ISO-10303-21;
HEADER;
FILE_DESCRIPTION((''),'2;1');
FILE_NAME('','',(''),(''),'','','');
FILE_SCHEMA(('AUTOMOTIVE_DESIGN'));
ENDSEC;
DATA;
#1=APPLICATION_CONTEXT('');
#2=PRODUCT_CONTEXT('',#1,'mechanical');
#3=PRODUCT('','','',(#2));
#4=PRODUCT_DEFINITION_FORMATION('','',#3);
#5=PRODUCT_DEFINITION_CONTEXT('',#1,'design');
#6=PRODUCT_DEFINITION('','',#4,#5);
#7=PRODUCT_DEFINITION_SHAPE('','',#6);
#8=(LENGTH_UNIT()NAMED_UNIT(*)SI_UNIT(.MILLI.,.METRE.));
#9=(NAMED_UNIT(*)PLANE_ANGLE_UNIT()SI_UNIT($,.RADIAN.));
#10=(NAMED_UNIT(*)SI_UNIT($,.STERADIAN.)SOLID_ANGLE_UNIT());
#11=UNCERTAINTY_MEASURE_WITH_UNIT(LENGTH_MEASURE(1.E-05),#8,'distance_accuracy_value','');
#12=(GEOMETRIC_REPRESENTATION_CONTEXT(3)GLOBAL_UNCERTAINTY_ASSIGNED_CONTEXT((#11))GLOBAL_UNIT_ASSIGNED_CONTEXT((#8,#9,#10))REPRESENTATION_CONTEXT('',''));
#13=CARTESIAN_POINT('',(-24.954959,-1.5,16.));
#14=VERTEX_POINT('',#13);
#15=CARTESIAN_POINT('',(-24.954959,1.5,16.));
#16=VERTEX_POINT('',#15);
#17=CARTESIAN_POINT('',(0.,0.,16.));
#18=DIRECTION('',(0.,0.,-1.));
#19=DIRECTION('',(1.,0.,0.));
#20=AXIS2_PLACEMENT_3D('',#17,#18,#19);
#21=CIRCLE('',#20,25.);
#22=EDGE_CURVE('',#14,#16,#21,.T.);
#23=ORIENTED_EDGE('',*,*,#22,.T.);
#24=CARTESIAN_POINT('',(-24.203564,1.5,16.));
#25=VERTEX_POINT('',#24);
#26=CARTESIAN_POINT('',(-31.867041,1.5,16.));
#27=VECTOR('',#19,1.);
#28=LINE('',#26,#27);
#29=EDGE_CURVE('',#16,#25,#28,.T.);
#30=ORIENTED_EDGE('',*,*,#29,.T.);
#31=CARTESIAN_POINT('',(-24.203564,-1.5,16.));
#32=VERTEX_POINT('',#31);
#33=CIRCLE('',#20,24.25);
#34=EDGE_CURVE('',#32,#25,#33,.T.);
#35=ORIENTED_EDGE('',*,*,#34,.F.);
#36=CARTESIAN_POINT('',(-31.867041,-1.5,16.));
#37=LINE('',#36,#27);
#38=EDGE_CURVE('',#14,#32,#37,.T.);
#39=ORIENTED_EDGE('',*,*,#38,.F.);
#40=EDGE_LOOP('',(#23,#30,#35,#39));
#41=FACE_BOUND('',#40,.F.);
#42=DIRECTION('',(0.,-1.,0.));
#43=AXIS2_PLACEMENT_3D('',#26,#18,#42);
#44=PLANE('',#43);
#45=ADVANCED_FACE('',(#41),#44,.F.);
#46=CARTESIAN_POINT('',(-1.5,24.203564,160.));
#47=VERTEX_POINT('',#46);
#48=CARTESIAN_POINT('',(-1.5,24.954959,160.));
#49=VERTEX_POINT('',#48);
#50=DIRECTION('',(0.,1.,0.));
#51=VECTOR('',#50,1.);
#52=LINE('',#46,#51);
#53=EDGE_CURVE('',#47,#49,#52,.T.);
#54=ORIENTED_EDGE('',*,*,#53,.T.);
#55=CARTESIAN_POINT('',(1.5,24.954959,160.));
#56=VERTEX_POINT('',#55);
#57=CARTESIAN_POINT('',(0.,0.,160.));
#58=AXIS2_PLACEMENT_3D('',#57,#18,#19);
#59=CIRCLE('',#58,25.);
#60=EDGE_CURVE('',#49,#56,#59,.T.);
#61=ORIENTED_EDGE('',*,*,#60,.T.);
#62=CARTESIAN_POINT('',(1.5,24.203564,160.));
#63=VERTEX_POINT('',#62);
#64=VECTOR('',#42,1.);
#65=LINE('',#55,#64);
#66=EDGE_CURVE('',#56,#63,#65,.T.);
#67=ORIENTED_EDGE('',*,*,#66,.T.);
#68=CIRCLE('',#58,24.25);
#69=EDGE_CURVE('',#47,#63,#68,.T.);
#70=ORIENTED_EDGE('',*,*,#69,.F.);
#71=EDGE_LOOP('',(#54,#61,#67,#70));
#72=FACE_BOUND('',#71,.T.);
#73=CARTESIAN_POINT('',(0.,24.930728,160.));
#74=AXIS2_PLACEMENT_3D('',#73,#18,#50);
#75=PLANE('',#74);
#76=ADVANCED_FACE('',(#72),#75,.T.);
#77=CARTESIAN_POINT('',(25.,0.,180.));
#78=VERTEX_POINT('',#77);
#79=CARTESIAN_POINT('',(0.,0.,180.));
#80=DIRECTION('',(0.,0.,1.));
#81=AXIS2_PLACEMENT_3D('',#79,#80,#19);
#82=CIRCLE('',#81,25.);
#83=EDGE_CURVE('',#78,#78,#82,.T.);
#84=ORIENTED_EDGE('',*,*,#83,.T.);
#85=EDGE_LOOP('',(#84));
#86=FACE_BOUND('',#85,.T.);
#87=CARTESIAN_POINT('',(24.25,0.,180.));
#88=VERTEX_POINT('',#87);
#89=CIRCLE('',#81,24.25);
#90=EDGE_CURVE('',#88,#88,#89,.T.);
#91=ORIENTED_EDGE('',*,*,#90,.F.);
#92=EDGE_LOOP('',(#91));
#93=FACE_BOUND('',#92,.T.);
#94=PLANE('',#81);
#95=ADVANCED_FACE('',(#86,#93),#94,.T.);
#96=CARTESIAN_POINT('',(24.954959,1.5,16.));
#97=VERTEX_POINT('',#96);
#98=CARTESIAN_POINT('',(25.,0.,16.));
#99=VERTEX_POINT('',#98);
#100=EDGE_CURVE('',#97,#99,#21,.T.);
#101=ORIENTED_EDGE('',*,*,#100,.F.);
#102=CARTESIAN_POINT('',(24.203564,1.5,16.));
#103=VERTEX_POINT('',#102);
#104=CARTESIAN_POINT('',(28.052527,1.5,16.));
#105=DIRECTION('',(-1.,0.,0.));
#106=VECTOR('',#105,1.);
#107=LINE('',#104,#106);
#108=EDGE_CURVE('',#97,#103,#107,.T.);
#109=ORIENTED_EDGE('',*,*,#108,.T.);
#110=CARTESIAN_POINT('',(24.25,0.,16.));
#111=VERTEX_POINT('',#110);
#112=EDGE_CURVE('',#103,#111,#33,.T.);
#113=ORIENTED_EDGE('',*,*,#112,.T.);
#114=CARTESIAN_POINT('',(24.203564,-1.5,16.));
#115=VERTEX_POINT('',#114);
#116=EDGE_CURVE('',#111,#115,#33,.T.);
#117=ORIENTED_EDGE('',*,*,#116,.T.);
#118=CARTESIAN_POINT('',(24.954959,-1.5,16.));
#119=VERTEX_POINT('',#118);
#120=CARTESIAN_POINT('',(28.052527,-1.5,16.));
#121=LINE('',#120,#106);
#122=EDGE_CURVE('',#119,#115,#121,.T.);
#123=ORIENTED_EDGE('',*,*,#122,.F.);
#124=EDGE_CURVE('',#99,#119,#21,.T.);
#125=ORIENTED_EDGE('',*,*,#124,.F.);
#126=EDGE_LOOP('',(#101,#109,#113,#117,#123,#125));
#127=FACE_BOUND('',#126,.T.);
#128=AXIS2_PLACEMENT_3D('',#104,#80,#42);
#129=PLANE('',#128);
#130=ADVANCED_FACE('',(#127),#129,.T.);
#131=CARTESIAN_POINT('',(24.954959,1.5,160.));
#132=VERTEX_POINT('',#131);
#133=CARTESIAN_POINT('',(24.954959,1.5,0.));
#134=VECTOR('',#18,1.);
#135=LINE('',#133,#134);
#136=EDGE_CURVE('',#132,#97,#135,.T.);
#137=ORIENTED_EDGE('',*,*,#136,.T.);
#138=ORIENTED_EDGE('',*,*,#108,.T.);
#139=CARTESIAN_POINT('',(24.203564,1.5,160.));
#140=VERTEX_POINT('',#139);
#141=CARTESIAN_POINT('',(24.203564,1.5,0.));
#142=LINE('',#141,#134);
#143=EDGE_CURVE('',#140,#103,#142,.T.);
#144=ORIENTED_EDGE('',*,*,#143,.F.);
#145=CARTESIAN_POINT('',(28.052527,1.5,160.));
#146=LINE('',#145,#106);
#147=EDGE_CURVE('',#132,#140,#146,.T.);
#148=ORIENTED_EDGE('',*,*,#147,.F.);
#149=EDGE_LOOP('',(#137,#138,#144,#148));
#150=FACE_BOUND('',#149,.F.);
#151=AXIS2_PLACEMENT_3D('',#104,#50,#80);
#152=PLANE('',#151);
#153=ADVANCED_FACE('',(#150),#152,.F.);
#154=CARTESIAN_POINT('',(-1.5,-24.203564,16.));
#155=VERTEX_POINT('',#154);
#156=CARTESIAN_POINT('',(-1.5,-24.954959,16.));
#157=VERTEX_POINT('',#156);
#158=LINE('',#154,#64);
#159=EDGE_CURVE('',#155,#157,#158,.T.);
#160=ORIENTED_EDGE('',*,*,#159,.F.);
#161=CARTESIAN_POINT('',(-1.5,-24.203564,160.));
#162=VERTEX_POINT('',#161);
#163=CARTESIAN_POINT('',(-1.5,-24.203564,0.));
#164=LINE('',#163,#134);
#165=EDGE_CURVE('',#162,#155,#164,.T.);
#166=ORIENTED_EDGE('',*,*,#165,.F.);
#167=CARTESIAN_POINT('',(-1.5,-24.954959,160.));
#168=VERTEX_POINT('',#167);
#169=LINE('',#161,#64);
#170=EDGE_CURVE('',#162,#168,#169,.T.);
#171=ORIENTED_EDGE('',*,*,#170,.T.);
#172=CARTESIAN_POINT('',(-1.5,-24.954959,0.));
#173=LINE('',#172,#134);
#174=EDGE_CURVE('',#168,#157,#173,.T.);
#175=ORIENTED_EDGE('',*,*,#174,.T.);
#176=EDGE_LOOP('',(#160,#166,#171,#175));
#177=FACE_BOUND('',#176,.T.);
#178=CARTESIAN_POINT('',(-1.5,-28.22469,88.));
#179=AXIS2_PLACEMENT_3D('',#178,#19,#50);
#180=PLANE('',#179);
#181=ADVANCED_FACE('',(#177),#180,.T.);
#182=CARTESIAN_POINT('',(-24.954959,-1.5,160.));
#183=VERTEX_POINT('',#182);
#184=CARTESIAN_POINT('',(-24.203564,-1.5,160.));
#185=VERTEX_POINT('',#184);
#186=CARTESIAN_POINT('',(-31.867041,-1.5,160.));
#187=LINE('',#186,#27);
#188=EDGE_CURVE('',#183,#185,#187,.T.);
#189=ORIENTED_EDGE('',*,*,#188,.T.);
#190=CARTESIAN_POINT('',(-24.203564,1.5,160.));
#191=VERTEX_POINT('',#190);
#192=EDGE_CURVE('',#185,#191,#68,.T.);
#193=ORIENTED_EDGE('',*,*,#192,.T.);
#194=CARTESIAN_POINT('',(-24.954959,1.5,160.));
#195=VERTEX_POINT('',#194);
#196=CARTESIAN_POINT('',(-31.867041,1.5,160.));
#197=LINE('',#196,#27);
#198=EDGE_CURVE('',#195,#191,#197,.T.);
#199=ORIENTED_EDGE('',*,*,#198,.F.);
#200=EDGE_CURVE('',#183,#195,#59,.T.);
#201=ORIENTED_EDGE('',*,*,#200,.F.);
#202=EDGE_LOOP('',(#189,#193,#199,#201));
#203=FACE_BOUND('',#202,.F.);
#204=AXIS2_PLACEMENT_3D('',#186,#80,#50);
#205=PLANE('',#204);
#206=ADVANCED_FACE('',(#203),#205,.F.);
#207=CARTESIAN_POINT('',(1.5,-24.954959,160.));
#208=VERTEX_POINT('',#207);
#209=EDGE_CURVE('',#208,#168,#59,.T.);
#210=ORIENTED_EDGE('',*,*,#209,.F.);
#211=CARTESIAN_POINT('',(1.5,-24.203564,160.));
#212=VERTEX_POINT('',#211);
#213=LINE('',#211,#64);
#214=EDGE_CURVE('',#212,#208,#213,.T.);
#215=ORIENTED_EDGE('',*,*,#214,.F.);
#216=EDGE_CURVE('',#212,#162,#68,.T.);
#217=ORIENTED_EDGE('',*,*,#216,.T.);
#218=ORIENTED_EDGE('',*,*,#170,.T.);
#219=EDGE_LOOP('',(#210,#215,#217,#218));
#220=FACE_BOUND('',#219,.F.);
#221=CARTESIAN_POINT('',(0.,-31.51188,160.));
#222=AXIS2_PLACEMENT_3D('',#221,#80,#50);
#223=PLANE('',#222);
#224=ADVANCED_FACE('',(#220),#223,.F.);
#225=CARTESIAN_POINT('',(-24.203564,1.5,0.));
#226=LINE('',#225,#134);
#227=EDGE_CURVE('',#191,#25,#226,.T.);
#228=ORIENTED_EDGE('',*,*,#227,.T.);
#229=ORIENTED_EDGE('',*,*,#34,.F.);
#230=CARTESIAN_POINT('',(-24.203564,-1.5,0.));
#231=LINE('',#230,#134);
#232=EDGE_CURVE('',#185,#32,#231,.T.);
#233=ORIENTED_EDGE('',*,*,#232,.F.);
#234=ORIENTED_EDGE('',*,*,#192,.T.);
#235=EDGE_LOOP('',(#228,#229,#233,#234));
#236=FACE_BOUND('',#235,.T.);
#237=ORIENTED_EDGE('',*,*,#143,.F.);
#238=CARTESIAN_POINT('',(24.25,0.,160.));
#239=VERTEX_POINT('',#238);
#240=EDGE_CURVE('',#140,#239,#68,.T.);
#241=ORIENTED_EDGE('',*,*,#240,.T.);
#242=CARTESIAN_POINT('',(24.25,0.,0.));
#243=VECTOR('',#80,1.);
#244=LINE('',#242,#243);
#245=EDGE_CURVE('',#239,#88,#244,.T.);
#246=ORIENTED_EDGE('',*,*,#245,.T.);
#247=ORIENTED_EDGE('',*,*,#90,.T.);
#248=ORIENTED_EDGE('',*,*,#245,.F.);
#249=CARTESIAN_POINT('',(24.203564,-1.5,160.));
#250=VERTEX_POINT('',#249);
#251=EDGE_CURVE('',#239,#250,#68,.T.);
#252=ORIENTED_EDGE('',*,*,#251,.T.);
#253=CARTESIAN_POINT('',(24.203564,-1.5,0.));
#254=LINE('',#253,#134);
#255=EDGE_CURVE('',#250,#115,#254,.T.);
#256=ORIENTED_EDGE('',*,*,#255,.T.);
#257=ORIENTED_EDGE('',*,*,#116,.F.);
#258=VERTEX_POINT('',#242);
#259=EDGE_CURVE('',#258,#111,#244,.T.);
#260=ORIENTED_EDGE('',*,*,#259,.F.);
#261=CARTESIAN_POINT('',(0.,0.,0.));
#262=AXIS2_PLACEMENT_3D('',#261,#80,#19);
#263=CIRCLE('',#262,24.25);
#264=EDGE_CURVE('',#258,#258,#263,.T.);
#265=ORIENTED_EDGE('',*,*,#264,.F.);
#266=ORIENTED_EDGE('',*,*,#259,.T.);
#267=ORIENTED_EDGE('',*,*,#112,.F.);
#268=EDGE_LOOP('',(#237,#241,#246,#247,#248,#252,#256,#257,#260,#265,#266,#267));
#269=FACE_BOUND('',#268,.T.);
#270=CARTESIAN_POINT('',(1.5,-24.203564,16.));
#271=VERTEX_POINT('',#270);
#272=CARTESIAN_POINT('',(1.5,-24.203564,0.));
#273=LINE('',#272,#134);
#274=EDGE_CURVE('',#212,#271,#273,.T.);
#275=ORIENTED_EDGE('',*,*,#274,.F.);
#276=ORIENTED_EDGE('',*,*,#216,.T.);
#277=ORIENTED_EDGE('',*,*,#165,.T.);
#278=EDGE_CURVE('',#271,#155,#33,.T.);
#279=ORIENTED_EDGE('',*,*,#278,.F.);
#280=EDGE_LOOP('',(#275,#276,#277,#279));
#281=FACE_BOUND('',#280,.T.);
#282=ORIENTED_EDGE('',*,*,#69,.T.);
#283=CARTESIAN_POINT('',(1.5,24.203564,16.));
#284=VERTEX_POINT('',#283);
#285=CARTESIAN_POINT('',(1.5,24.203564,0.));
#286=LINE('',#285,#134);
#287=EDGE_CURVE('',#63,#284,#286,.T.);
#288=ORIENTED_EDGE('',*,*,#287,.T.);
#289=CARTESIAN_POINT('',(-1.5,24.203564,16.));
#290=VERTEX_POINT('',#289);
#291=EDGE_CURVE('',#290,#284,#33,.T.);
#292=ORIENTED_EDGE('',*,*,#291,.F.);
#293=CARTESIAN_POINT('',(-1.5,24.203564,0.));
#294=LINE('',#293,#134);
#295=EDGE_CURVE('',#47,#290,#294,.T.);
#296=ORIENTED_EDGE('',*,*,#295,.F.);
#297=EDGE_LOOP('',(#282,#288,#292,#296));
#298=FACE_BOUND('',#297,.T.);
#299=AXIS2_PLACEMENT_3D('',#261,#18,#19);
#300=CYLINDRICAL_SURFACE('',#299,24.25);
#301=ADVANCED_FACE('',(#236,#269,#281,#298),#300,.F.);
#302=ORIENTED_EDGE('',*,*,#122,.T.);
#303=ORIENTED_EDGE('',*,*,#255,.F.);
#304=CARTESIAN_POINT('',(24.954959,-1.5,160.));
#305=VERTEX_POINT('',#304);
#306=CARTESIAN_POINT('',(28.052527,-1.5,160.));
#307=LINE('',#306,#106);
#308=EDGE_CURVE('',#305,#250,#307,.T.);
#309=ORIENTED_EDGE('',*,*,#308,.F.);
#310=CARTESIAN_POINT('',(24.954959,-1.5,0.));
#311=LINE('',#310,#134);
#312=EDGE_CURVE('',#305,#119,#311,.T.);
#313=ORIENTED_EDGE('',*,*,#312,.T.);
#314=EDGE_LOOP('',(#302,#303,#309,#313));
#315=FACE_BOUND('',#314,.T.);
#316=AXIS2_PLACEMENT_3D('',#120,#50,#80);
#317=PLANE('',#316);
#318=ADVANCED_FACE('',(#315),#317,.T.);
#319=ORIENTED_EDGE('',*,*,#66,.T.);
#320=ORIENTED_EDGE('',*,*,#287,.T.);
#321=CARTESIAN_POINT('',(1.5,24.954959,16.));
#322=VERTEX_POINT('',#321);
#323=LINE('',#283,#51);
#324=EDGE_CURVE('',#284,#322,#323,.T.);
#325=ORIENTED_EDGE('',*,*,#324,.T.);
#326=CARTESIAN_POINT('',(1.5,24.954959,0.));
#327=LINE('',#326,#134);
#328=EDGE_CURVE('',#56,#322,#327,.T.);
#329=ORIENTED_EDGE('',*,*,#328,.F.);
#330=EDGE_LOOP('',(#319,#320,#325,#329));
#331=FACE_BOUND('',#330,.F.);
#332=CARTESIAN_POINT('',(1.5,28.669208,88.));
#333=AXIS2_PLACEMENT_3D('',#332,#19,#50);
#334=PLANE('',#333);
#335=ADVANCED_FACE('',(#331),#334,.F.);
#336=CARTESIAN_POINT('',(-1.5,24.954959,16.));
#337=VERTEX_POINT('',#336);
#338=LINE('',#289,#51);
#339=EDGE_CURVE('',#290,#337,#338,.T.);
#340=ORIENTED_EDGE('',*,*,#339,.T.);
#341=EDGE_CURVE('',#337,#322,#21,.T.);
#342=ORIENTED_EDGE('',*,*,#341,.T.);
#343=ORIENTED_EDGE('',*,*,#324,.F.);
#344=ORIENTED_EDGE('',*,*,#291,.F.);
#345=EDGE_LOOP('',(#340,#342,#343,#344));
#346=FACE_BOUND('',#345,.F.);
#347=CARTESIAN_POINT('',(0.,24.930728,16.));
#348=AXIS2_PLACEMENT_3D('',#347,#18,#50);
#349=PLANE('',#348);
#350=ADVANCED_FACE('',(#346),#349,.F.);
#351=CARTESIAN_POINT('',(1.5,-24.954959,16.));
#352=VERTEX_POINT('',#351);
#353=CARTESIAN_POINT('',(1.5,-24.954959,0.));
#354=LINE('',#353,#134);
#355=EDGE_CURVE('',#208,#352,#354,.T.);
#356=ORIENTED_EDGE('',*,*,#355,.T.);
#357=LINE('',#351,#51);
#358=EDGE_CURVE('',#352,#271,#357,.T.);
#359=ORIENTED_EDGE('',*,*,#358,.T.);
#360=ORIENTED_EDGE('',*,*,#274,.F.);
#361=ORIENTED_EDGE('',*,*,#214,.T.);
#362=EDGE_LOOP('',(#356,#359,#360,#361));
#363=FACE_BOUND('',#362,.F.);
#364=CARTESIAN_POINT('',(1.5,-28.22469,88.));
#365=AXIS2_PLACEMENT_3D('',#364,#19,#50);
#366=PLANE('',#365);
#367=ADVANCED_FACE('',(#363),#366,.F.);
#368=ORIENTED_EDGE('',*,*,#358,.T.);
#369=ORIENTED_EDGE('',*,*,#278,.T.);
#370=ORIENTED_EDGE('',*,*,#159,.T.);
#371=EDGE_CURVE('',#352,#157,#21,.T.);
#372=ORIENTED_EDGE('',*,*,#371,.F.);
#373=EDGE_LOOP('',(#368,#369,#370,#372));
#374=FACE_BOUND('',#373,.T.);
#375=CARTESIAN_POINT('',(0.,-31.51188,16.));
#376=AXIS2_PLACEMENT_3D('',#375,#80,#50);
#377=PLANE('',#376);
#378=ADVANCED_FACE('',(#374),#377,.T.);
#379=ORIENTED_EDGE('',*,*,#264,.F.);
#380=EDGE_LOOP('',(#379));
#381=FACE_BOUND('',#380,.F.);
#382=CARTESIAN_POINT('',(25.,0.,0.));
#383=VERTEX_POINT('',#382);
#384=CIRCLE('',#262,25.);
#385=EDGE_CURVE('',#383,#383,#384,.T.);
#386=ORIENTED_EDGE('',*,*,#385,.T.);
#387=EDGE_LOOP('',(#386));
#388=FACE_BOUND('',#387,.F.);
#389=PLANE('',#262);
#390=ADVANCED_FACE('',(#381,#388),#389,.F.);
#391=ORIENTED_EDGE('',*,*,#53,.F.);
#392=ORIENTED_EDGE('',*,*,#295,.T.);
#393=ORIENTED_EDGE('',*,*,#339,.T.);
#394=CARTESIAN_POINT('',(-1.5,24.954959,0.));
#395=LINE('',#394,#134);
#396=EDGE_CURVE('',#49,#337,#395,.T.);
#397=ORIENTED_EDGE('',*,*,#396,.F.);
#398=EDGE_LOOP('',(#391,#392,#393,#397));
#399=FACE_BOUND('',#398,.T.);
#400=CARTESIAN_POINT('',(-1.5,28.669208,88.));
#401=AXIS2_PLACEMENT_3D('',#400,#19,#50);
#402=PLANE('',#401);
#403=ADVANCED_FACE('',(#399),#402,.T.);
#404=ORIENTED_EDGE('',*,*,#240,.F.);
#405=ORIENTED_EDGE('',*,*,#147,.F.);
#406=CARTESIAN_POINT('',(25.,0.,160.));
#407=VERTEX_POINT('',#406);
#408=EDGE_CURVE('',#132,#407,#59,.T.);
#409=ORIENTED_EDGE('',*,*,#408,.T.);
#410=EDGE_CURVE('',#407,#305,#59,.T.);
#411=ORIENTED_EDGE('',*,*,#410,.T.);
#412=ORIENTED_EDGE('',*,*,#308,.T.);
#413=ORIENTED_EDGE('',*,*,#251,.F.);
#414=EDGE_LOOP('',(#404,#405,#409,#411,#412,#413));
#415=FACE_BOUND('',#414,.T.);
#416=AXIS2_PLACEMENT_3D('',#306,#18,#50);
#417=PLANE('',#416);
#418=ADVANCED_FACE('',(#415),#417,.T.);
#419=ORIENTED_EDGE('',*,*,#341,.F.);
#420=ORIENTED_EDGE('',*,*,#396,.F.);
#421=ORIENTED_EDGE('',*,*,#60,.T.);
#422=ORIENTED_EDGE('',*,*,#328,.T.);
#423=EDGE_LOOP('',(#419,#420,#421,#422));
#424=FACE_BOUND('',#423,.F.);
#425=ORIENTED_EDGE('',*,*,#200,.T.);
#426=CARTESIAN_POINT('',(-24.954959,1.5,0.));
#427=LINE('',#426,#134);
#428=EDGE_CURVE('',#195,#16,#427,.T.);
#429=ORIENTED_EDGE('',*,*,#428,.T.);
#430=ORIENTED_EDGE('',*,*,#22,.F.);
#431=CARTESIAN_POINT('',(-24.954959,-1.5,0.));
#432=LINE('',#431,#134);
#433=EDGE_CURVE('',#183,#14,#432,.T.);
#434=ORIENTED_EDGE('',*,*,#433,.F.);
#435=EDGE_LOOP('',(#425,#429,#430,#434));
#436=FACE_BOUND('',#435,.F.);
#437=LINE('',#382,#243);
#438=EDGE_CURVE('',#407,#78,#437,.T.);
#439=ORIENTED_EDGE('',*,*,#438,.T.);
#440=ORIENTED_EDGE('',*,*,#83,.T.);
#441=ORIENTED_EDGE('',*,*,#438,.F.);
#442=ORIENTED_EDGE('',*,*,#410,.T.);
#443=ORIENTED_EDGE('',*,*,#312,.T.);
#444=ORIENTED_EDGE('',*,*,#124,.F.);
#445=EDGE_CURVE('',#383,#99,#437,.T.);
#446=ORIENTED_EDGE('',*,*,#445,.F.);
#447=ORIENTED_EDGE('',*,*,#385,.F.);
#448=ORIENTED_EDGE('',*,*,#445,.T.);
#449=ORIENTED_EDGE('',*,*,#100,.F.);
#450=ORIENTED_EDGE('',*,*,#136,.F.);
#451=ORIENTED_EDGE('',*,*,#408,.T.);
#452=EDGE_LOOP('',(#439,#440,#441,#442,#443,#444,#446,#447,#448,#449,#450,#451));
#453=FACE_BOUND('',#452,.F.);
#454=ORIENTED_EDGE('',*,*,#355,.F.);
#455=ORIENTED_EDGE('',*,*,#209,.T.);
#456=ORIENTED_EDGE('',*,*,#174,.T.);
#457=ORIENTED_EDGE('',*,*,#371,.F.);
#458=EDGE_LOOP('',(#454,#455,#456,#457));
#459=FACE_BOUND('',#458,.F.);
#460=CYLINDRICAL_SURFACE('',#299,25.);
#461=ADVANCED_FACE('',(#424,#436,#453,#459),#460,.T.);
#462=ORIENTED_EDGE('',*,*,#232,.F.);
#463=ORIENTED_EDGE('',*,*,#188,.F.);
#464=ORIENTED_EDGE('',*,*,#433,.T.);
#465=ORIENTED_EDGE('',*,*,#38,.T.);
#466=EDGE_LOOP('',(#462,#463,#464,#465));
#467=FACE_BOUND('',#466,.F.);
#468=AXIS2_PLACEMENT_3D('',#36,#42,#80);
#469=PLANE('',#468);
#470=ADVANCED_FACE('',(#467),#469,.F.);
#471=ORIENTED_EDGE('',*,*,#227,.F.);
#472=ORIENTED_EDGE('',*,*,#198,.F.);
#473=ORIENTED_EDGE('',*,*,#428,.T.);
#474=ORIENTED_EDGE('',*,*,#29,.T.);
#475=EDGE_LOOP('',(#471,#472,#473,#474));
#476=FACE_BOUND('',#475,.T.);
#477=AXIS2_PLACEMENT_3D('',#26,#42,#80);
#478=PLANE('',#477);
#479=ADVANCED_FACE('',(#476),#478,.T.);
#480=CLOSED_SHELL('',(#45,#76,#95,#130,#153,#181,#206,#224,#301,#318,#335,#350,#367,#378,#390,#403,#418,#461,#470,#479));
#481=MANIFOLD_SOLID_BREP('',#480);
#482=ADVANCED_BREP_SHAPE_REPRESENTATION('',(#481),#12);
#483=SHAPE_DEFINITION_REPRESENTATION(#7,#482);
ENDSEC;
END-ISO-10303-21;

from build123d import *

# Parameters (mm, degrees)
F0_R      = 25
F0_R_2    = 24.25
F1_DEPTH  = 180
F2_W      = 6.5743785797
F2_H      = 144
F2_W_2    = 7.4769609538
F3_DEPTH  = 1.5
F4_DEPTH  = 4
F5_DEPTH  = 4
F6_W      = 7.290615557
F6_H      = 144
F6_W_2    = 7.1577106116
F7_DEPTH  = 1.5
F8_DEPTH  = 4
F9_DEPTH  = 25
F10_DEPTH = 10


# Not quite as in the source:
# - a feature names something its author has since deleted; it is built from what else it names


with BuildPart() as f1:
    # F0 (on Top) → F1 (new body)
    with BuildSketch(Plane.XY):
        Circle(F0_R)
        Circle(F0_R_2, mode=Mode.SUBTRACT)
    extrude(amount=F1_DEPTH)

    # F2 (on Right) → F3 (cut, symmetric)
    with BuildSketch(Plane.YZ):
        with Locations((-28.224690467, 88)):
            Rectangle(F2_W, F2_H)
        with Locations((28.6692082882, 88)):
            Rectangle(F2_W_2, F2_H)
    extrude(amount=F3_DEPTH, both=True, mode=Mode.SUBTRACT)

    # F4 (cut): faces of the model
    f4_faces = [f1.faces().sort_by_distance(p)[0] for p in [
        (0, -24.9375011772, 88),
        (0, 24.9307278113, 88),
    ]]
    extrude(f4_faces, amount=-F4_DEPTH, dir=(0, -1, 0), mode=Mode.SUBTRACT)

    # F5 (cut): a face of the model
    f5_faces = [f1.faces().sort_by_distance(p)[0] for p in [
        (0, 24.9307278113, 88),
    ]]
    extrude(f5_faces, amount=-F5_DEPTH, mode=Mode.SUBTRACT)

    # F6 (on Front) → F7 (join, symmetric)
    with BuildSketch(Plane.XZ):
        with Locations((28.4072192601, 88)):
            Rectangle(F6_W, F6_H)
        with Locations((-28.2881861775, 88)):
            Rectangle(F6_W_2, F6_H)
    extrude(amount=F7_DEPTH, both=True)

    # F8 (cut): faces of the model
    f8_faces = [f1.faces().sort_by_distance(p)[0] for p in [
        (32.0525270386, 0, 88),
        (-31.8670414833, 0, 88),
    ]]
    extrude(f8_faces, amount=-F8_DEPTH, dir=(1, 0, 0), mode=Mode.SUBTRACT)

    # F9 (cut): a face of the model
    f9_faces = [f1.faces().sort_by_distance(p)[0] for p in [
        (28.0525270386, 0, 88),
    ]]
    extrude(f9_faces, amount=-F9_DEPTH, mode=Mode.SUBTRACT)

    # F10 (cut): a face of the model
    f10_faces = [f1.faces().sort_by_distance(p)[0] for p in [
        (-31.8670414833, 0, 88),
    ]]
    extrude(f10_faces, amount=-F10_DEPTH, mode=Mode.SUBTRACT)


solid = f1.part
